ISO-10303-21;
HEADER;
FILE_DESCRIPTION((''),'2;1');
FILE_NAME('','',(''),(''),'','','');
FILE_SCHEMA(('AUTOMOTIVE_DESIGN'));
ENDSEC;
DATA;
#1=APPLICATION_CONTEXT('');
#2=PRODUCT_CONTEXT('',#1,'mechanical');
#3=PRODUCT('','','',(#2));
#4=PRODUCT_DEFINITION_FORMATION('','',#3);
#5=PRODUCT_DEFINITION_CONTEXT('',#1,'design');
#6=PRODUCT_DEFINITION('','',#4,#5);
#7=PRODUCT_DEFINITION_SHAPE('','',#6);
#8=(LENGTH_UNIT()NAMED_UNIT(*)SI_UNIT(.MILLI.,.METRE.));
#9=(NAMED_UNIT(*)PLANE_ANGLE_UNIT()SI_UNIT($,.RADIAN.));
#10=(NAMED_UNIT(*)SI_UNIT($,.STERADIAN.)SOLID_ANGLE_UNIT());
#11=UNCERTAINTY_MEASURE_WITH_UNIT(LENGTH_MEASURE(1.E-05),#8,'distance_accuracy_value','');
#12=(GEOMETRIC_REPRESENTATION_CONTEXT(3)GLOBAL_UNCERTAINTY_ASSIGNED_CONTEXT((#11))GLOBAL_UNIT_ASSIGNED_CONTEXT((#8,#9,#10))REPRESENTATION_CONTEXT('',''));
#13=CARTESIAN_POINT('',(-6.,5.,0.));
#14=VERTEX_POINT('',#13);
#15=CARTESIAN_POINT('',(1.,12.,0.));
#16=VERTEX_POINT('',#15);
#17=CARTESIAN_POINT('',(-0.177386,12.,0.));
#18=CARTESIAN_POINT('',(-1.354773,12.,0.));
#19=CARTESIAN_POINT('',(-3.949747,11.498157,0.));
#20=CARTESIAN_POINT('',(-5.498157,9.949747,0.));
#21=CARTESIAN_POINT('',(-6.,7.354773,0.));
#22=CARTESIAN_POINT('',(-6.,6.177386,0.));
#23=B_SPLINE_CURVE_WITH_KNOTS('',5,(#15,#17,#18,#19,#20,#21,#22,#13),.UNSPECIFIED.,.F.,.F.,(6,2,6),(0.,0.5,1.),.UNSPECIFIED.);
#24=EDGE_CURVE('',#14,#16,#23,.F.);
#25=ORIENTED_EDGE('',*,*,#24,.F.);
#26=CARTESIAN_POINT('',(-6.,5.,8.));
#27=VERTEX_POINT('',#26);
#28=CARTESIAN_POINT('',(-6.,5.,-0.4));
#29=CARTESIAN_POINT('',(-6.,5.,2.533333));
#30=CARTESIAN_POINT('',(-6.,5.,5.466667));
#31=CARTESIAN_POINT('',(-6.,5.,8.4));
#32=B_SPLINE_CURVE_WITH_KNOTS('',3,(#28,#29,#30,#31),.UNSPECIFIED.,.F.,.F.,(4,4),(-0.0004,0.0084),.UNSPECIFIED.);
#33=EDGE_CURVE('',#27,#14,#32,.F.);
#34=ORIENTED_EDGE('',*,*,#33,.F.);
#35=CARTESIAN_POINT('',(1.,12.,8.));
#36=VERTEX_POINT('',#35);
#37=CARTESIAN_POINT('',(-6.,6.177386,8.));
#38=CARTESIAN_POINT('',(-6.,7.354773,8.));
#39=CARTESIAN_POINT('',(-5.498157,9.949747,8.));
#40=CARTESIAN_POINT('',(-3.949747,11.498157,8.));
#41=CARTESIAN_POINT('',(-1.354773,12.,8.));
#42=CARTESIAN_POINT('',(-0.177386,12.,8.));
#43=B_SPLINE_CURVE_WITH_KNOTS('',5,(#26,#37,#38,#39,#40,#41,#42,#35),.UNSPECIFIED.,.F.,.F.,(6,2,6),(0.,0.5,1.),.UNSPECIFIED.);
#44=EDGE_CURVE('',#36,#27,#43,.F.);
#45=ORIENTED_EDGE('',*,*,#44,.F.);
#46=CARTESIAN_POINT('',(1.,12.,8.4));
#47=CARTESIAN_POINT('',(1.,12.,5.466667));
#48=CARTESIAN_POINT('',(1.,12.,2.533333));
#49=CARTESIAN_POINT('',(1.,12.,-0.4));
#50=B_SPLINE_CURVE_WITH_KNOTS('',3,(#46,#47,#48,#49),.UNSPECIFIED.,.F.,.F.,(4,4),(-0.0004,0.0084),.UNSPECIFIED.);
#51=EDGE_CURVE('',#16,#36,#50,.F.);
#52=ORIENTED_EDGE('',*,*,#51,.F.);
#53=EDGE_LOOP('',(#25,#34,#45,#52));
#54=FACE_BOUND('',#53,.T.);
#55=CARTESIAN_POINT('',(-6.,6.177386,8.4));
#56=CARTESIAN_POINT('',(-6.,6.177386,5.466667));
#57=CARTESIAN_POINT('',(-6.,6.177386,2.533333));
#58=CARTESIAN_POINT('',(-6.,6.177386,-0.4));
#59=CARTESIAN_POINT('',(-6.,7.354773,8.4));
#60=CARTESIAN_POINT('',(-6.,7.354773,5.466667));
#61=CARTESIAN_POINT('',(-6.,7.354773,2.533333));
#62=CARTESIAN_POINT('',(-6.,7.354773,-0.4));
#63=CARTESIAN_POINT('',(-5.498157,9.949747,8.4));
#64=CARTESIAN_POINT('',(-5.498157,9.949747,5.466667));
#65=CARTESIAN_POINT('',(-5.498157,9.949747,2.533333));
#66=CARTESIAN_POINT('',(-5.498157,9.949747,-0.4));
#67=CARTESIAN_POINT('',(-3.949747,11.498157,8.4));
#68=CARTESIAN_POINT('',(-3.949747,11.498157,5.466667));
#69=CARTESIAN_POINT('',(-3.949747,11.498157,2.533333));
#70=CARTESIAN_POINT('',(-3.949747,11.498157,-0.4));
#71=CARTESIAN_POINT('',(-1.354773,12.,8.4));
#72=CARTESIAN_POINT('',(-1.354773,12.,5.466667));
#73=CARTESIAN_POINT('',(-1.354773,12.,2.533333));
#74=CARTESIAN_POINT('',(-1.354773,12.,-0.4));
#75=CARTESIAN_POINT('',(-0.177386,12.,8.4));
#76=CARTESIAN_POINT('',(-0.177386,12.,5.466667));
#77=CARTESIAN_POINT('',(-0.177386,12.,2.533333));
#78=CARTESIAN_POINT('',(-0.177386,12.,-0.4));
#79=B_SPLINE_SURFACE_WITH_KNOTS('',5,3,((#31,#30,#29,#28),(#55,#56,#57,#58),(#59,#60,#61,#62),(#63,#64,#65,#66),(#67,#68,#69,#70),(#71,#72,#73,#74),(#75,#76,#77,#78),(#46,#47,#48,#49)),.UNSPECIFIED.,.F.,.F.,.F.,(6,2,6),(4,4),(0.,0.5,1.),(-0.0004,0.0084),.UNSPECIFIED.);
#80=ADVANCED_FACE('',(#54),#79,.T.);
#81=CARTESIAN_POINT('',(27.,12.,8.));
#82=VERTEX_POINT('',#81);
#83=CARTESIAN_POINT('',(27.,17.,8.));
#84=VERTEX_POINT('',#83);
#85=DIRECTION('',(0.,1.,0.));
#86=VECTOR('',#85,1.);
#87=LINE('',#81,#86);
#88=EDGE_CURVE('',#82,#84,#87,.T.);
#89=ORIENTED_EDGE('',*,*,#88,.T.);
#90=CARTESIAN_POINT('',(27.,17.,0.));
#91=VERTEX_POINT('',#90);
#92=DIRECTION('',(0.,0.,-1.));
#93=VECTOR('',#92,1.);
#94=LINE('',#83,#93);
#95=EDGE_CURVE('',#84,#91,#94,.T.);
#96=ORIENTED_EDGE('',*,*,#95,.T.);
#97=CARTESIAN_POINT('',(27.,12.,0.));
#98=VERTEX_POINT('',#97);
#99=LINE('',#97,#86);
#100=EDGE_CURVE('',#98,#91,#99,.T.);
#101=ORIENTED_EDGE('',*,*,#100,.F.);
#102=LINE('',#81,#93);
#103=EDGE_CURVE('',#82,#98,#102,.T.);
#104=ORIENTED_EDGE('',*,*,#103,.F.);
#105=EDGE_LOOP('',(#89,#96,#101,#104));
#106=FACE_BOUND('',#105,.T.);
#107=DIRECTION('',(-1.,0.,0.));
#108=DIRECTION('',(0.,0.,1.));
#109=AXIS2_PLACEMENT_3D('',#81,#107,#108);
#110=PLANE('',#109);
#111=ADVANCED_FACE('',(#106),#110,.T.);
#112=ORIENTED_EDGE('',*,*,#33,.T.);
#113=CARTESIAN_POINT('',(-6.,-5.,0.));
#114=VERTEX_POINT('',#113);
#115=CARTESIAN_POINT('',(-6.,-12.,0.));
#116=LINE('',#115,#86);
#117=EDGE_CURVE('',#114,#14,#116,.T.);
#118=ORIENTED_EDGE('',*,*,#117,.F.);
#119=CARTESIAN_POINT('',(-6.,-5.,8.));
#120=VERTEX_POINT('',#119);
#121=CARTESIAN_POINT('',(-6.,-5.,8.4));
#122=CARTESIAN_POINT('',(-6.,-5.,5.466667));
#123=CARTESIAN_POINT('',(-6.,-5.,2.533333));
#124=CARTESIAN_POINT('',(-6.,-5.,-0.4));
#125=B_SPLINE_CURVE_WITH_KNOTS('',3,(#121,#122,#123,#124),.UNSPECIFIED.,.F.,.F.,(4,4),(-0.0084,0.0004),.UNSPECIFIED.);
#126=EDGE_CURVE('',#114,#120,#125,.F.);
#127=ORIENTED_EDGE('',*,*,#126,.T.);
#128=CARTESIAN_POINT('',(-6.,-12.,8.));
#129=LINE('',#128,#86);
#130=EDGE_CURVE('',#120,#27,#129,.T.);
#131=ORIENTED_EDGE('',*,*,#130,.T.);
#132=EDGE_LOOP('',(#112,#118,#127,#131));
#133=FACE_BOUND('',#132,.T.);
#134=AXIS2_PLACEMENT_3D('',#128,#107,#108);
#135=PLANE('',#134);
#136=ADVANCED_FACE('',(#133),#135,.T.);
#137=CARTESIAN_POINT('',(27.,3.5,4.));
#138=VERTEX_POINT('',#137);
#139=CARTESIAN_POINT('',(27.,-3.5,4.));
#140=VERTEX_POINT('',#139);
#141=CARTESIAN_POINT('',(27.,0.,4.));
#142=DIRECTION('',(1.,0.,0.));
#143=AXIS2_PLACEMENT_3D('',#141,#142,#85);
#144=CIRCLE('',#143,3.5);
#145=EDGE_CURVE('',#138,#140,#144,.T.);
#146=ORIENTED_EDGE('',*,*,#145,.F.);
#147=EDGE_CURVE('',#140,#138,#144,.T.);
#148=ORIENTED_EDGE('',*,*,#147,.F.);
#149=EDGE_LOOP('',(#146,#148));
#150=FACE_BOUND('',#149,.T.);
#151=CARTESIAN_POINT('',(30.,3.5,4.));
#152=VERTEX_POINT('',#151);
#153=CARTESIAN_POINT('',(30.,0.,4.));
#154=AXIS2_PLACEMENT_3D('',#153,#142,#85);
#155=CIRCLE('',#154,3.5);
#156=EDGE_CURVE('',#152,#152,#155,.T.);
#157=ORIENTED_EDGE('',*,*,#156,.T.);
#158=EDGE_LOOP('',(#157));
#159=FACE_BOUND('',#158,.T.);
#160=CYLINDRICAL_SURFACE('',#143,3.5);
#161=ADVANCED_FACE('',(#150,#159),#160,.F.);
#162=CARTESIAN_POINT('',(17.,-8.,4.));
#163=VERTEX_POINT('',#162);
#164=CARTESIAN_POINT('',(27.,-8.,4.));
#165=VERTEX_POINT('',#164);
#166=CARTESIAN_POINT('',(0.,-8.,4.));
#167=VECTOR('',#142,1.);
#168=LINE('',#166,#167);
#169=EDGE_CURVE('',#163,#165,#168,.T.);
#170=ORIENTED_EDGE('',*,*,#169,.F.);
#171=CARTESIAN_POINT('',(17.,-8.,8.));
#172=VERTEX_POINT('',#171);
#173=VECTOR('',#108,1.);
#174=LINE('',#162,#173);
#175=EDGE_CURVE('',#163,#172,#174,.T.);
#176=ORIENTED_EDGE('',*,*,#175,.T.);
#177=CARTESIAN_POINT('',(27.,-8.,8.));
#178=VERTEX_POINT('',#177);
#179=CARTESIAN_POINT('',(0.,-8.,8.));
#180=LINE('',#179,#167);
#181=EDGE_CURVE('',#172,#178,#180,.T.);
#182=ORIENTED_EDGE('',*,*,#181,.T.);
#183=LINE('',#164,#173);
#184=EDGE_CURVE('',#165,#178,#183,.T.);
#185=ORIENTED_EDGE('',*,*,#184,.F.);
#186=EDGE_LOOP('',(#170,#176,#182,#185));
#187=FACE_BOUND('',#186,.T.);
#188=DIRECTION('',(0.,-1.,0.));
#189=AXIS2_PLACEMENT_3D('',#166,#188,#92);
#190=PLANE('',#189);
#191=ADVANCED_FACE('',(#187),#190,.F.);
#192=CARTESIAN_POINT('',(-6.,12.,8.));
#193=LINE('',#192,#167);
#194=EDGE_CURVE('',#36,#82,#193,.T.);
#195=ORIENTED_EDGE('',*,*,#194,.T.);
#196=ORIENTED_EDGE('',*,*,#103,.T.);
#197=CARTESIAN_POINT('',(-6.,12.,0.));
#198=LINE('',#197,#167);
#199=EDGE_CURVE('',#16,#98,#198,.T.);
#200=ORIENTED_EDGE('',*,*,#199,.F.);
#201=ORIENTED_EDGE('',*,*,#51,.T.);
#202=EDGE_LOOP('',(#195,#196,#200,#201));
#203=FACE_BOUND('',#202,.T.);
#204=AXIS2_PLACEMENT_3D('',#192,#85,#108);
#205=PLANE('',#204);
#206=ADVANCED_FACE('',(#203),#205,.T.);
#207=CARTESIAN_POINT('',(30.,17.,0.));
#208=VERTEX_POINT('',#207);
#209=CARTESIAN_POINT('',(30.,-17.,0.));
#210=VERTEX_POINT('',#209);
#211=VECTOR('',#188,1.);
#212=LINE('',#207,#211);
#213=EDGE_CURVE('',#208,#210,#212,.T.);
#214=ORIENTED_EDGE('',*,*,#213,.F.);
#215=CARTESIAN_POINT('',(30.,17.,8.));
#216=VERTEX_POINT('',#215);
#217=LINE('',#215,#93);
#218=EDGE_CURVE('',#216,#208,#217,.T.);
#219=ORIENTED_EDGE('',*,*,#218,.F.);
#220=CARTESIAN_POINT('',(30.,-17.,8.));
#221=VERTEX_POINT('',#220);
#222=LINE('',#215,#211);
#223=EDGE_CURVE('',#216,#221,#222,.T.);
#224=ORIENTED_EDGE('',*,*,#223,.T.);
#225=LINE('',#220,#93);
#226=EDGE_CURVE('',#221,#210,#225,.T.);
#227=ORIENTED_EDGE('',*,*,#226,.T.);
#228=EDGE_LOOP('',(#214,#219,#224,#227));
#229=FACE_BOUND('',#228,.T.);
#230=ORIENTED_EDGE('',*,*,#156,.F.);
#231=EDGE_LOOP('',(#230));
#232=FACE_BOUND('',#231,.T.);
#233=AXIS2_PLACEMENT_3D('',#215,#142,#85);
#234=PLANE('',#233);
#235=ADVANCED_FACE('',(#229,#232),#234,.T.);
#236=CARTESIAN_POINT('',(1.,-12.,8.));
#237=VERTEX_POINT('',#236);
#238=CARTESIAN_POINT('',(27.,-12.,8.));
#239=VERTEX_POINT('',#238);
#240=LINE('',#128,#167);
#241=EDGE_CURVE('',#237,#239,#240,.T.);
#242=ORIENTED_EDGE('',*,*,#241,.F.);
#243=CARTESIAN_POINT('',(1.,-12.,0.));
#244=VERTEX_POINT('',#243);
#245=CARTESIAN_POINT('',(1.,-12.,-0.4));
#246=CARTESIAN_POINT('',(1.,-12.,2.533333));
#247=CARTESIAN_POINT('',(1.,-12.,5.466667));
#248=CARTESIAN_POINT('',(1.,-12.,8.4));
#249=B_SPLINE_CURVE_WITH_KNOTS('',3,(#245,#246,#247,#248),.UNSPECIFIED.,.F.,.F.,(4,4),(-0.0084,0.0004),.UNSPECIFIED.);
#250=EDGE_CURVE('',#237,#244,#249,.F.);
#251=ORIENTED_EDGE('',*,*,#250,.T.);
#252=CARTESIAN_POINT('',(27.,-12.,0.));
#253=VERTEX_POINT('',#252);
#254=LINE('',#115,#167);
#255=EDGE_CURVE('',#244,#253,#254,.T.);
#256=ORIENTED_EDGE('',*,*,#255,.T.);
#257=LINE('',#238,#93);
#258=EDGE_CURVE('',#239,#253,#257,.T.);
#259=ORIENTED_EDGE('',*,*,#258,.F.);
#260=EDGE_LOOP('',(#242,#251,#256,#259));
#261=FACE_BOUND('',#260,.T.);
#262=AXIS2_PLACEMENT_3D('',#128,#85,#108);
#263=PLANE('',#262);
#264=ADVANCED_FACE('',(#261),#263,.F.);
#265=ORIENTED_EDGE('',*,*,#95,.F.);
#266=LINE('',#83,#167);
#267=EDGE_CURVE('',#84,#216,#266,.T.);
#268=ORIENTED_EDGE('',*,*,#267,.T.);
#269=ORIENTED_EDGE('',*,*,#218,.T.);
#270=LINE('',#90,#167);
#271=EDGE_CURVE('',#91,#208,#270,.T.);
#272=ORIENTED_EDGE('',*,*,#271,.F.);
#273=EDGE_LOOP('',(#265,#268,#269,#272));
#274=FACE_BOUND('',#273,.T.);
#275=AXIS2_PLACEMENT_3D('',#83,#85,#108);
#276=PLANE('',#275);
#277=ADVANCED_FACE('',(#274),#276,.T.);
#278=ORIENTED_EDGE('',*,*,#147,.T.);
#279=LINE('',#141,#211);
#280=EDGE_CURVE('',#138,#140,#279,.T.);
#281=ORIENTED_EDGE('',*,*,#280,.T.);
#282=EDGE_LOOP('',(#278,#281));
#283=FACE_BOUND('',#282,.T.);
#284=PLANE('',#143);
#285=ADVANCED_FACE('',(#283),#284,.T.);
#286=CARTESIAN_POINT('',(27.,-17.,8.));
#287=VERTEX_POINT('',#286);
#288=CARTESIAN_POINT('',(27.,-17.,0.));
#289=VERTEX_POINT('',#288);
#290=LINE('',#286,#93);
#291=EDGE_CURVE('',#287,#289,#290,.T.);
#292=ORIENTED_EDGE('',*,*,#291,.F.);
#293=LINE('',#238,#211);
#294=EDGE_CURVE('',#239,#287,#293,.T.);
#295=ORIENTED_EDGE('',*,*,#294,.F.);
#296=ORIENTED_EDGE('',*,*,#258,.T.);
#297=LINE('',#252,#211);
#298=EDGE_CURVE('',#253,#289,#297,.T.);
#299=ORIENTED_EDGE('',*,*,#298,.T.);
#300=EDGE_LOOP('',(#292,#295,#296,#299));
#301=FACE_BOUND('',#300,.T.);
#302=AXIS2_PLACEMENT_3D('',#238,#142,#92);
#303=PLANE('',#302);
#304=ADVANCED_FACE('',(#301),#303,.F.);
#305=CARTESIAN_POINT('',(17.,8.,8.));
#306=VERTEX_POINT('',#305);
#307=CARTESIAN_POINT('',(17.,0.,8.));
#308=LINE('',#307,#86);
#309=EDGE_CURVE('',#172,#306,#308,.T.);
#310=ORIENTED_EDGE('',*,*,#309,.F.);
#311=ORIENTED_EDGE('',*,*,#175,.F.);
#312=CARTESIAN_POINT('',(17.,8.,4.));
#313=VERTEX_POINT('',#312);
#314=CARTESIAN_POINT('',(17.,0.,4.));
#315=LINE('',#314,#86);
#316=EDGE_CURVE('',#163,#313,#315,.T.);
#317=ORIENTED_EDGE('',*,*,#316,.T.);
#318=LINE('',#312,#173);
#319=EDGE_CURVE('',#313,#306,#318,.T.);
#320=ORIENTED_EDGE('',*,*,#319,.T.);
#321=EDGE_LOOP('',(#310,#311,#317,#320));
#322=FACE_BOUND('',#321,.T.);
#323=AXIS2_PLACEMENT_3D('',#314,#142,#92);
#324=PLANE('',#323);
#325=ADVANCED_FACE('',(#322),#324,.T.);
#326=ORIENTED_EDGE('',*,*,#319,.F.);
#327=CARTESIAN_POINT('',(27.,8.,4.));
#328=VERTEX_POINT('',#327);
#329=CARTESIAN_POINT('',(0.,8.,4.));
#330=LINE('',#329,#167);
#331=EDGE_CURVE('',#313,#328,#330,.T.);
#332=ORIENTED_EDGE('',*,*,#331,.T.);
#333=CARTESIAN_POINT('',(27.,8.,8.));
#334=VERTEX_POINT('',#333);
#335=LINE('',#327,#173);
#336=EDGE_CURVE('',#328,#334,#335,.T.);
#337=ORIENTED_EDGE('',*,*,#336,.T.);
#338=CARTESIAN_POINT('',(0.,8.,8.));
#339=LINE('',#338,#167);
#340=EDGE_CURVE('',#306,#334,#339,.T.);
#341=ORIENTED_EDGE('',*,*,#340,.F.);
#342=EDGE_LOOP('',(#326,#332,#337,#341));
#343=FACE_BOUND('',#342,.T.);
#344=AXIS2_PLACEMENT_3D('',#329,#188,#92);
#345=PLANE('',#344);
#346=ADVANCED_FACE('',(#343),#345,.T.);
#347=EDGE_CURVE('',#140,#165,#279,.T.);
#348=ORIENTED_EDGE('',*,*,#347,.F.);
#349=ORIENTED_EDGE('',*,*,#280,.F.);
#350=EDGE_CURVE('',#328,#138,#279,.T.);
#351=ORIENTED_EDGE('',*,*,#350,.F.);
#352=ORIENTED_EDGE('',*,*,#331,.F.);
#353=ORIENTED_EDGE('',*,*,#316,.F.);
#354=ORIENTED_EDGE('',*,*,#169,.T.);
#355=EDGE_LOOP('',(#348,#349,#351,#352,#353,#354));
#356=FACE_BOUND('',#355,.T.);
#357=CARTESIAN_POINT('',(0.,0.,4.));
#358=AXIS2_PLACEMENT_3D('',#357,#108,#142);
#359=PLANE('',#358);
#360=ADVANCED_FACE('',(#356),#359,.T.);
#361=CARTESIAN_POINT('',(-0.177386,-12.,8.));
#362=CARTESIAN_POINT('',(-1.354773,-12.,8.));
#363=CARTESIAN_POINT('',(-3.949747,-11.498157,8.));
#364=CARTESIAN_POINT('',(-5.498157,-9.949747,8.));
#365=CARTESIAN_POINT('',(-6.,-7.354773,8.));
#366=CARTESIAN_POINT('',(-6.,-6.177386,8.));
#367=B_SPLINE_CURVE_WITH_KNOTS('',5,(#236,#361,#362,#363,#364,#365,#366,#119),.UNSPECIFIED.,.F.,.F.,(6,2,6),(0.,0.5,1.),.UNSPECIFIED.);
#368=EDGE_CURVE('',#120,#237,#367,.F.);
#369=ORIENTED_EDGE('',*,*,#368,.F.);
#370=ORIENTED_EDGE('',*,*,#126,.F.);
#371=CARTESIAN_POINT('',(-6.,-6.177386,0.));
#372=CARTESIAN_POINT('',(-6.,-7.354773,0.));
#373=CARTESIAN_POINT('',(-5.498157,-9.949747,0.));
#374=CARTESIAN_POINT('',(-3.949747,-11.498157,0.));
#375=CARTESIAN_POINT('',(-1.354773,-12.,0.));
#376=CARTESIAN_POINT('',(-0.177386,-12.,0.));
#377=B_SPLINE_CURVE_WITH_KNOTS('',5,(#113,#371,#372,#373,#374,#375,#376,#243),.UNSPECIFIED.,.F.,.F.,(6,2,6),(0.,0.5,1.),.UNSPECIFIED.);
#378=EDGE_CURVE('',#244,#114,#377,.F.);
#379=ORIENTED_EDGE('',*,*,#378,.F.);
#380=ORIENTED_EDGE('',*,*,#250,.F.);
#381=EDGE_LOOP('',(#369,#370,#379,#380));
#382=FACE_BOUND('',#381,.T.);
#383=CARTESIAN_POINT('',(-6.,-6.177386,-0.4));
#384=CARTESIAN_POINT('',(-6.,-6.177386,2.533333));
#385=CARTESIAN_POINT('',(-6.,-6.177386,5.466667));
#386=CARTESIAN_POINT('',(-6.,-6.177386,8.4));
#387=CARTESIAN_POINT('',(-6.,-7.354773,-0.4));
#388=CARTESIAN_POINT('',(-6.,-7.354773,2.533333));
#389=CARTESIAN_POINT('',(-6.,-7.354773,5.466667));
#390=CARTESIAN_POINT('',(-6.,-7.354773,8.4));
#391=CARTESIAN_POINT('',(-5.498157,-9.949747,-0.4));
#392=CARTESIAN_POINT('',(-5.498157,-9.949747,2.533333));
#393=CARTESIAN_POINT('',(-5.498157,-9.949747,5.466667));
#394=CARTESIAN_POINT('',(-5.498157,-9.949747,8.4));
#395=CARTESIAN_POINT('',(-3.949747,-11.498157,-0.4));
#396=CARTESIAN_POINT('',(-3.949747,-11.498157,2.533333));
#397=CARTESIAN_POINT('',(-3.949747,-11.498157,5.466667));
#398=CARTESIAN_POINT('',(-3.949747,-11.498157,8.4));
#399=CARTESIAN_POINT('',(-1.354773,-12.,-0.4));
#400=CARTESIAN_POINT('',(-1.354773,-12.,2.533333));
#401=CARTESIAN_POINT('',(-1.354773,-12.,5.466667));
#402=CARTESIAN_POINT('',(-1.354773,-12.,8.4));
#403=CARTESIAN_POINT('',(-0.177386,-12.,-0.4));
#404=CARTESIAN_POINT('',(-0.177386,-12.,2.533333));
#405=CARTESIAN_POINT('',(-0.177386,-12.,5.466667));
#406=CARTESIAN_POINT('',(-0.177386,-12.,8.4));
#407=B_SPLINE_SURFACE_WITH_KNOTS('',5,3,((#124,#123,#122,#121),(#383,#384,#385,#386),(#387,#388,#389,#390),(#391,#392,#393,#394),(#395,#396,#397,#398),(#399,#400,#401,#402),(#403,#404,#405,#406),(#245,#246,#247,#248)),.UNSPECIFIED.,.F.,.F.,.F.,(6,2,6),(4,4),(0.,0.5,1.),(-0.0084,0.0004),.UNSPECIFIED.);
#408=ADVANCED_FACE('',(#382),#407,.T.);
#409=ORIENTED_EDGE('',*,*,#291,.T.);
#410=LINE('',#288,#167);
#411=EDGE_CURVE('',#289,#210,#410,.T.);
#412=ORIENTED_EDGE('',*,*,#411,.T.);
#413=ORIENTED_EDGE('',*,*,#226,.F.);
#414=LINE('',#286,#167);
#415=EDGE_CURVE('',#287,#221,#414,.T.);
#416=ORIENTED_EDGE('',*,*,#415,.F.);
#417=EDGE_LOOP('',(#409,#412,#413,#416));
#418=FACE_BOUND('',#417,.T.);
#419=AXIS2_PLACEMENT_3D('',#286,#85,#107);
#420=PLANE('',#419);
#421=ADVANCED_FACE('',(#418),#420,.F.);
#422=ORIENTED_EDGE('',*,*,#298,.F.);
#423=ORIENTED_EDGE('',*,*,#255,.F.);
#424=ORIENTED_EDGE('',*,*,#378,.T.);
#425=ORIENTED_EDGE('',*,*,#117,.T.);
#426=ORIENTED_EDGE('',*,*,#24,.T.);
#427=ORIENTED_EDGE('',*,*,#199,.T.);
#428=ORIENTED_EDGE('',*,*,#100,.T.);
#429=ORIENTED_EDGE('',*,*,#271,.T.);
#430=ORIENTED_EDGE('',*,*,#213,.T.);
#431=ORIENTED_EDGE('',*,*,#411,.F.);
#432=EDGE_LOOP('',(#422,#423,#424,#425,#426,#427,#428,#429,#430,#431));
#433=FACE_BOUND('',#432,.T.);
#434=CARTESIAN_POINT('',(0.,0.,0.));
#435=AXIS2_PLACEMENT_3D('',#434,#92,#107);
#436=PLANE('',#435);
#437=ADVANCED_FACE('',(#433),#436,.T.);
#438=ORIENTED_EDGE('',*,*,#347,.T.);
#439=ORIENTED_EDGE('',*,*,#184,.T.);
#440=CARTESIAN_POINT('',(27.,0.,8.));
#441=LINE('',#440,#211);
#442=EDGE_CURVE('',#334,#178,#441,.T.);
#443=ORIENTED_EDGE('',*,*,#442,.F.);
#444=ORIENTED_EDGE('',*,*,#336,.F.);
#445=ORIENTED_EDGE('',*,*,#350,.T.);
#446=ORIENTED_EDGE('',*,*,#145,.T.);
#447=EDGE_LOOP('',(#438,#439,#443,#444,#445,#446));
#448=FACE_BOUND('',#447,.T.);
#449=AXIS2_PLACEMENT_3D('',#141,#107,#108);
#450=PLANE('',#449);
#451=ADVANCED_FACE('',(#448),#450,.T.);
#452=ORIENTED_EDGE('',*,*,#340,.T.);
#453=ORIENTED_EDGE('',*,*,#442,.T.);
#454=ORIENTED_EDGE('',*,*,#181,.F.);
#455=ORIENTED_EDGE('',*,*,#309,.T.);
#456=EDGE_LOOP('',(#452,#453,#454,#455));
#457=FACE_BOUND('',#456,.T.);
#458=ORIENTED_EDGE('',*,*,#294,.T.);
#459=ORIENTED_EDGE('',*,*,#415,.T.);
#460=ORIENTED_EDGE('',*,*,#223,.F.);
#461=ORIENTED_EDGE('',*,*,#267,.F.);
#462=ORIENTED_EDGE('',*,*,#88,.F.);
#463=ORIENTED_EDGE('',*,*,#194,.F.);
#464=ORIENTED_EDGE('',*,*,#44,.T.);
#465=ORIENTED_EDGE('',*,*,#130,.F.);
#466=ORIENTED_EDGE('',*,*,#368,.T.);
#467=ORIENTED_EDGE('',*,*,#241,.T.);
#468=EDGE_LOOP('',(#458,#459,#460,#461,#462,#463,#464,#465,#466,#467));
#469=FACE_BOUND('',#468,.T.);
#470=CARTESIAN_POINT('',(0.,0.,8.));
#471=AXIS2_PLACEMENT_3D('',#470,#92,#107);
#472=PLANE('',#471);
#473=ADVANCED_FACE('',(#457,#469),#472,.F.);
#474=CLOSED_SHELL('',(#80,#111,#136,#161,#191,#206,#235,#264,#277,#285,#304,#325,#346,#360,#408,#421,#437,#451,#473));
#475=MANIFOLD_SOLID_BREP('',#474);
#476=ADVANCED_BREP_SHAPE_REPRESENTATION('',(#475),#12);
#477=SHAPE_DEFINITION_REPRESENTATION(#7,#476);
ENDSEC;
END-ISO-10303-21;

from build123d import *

# Parameters (mm, degrees)
BOSS_EXTRUDE1_DEPTH = 8
FILLET3_SIZE        = 7
SKETCH2_W           = 10
SKETCH2_H           = 8
CUT_EXTRUDE1_DEPTH  = 4
SKETCH3_R           = 3.5
CUT_EXTRUDE2_DEPTH  = 3


with BuildPart() as part:
    # Sketch1 → Boss-Extrude1 (new body)
    with BuildSketch(Plane.XY):
        Polygon((-6, -12), (-6, 12), (27, 12), (27, 17), (30, 17), (30, -17), (27, -17), (27, -12), align=None)
    extrude(amount=BOSS_EXTRUDE1_DEPTH)

    # Fillet3
    # a fillet whose section is not a circle: 7 mm, written as the material it takes off along each edge
    with BuildSketch(Plane(origin=(-6, 12, -17.5), x_dir=(0, -1, 0), z_dir=(0, 0, 1))) as fillet3_piece_1:
        with BuildLine():
            add(Edge.make_bspline([(FILLET3_SIZE, 0), (FILLET3_SIZE * 0.831801948466, 0), (FILLET3_SIZE * 0.663603896932, 0), (FILLET3_SIZE * 0.292893218813, FILLET3_SIZE * 0.0716919198361), (FILLET3_SIZE * 0.0716919198361, FILLET3_SIZE * 0.292893218813), (0, FILLET3_SIZE * 0.663603896932), (0, FILLET3_SIZE * 0.831801948466), (0, FILLET3_SIZE)], knots=[0, 0, 0, 0, 0, 0, 0.5, 0.5, 1, 1, 1, 1, 1, 1], degree=5))
            Line((0, FILLET3_SIZE), (0, 0))
            Line((0, 0), (FILLET3_SIZE, 0))
        make_face()
    extrude(amount=43, mode=Mode.SUBTRACT)
    with BuildSketch(Plane(origin=(-6, -12, -17.5), x_dir=(0, 1, 0), z_dir=(0, 0, 1))) as fillet3_piece_2:
        with BuildLine():
            add(Edge.make_bspline([(FILLET3_SIZE, 0), (FILLET3_SIZE * 0.831801948466, 0), (FILLET3_SIZE * 0.663603896932, 0), (FILLET3_SIZE * 0.292893218813, -FILLET3_SIZE * 0.0716919198361), (FILLET3_SIZE * 0.0716919198361, -FILLET3_SIZE * 0.292893218813), (0, -FILLET3_SIZE * 0.663603896932), (0, -FILLET3_SIZE * 0.831801948466), (0, -FILLET3_SIZE)], knots=[0, 0, 0, 0, 0, 0, 0.5, 0.5, 1, 1, 1, 1, 1, 1], degree=5))
            Line((0, -FILLET3_SIZE), (0, 0))
            Line((0, 0), (FILLET3_SIZE, 0))
        make_face()
    extrude(amount=43, mode=Mode.SUBTRACT)

    # Sketch2 → Cut-Extrude1 (cut)
    with BuildSketch(Plane.XY.offset(8)):
        with Locations((22, 4)):
            Rectangle(SKETCH2_W, SKETCH2_H)
        with Locations((22, -4)):
            Rectangle(SKETCH2_W, SKETCH2_H)
    extrude(amount=-CUT_EXTRUDE1_DEPTH, mode=Mode.SUBTRACT)

    # Sketch3 → Cut-Extrude2 (cut)
    with BuildSketch(Plane(origin=(30, 0, 0), x_dir=(0, 0, -1), z_dir=(1, 0, 0))):
        with Locations(Location((-4, 0, 0), (0, 0, 90))):
            Circle(SKETCH3_R)
    extrude(amount=-CUT_EXTRUDE2_DEPTH, mode=Mode.SUBTRACT)


solid = part.part
